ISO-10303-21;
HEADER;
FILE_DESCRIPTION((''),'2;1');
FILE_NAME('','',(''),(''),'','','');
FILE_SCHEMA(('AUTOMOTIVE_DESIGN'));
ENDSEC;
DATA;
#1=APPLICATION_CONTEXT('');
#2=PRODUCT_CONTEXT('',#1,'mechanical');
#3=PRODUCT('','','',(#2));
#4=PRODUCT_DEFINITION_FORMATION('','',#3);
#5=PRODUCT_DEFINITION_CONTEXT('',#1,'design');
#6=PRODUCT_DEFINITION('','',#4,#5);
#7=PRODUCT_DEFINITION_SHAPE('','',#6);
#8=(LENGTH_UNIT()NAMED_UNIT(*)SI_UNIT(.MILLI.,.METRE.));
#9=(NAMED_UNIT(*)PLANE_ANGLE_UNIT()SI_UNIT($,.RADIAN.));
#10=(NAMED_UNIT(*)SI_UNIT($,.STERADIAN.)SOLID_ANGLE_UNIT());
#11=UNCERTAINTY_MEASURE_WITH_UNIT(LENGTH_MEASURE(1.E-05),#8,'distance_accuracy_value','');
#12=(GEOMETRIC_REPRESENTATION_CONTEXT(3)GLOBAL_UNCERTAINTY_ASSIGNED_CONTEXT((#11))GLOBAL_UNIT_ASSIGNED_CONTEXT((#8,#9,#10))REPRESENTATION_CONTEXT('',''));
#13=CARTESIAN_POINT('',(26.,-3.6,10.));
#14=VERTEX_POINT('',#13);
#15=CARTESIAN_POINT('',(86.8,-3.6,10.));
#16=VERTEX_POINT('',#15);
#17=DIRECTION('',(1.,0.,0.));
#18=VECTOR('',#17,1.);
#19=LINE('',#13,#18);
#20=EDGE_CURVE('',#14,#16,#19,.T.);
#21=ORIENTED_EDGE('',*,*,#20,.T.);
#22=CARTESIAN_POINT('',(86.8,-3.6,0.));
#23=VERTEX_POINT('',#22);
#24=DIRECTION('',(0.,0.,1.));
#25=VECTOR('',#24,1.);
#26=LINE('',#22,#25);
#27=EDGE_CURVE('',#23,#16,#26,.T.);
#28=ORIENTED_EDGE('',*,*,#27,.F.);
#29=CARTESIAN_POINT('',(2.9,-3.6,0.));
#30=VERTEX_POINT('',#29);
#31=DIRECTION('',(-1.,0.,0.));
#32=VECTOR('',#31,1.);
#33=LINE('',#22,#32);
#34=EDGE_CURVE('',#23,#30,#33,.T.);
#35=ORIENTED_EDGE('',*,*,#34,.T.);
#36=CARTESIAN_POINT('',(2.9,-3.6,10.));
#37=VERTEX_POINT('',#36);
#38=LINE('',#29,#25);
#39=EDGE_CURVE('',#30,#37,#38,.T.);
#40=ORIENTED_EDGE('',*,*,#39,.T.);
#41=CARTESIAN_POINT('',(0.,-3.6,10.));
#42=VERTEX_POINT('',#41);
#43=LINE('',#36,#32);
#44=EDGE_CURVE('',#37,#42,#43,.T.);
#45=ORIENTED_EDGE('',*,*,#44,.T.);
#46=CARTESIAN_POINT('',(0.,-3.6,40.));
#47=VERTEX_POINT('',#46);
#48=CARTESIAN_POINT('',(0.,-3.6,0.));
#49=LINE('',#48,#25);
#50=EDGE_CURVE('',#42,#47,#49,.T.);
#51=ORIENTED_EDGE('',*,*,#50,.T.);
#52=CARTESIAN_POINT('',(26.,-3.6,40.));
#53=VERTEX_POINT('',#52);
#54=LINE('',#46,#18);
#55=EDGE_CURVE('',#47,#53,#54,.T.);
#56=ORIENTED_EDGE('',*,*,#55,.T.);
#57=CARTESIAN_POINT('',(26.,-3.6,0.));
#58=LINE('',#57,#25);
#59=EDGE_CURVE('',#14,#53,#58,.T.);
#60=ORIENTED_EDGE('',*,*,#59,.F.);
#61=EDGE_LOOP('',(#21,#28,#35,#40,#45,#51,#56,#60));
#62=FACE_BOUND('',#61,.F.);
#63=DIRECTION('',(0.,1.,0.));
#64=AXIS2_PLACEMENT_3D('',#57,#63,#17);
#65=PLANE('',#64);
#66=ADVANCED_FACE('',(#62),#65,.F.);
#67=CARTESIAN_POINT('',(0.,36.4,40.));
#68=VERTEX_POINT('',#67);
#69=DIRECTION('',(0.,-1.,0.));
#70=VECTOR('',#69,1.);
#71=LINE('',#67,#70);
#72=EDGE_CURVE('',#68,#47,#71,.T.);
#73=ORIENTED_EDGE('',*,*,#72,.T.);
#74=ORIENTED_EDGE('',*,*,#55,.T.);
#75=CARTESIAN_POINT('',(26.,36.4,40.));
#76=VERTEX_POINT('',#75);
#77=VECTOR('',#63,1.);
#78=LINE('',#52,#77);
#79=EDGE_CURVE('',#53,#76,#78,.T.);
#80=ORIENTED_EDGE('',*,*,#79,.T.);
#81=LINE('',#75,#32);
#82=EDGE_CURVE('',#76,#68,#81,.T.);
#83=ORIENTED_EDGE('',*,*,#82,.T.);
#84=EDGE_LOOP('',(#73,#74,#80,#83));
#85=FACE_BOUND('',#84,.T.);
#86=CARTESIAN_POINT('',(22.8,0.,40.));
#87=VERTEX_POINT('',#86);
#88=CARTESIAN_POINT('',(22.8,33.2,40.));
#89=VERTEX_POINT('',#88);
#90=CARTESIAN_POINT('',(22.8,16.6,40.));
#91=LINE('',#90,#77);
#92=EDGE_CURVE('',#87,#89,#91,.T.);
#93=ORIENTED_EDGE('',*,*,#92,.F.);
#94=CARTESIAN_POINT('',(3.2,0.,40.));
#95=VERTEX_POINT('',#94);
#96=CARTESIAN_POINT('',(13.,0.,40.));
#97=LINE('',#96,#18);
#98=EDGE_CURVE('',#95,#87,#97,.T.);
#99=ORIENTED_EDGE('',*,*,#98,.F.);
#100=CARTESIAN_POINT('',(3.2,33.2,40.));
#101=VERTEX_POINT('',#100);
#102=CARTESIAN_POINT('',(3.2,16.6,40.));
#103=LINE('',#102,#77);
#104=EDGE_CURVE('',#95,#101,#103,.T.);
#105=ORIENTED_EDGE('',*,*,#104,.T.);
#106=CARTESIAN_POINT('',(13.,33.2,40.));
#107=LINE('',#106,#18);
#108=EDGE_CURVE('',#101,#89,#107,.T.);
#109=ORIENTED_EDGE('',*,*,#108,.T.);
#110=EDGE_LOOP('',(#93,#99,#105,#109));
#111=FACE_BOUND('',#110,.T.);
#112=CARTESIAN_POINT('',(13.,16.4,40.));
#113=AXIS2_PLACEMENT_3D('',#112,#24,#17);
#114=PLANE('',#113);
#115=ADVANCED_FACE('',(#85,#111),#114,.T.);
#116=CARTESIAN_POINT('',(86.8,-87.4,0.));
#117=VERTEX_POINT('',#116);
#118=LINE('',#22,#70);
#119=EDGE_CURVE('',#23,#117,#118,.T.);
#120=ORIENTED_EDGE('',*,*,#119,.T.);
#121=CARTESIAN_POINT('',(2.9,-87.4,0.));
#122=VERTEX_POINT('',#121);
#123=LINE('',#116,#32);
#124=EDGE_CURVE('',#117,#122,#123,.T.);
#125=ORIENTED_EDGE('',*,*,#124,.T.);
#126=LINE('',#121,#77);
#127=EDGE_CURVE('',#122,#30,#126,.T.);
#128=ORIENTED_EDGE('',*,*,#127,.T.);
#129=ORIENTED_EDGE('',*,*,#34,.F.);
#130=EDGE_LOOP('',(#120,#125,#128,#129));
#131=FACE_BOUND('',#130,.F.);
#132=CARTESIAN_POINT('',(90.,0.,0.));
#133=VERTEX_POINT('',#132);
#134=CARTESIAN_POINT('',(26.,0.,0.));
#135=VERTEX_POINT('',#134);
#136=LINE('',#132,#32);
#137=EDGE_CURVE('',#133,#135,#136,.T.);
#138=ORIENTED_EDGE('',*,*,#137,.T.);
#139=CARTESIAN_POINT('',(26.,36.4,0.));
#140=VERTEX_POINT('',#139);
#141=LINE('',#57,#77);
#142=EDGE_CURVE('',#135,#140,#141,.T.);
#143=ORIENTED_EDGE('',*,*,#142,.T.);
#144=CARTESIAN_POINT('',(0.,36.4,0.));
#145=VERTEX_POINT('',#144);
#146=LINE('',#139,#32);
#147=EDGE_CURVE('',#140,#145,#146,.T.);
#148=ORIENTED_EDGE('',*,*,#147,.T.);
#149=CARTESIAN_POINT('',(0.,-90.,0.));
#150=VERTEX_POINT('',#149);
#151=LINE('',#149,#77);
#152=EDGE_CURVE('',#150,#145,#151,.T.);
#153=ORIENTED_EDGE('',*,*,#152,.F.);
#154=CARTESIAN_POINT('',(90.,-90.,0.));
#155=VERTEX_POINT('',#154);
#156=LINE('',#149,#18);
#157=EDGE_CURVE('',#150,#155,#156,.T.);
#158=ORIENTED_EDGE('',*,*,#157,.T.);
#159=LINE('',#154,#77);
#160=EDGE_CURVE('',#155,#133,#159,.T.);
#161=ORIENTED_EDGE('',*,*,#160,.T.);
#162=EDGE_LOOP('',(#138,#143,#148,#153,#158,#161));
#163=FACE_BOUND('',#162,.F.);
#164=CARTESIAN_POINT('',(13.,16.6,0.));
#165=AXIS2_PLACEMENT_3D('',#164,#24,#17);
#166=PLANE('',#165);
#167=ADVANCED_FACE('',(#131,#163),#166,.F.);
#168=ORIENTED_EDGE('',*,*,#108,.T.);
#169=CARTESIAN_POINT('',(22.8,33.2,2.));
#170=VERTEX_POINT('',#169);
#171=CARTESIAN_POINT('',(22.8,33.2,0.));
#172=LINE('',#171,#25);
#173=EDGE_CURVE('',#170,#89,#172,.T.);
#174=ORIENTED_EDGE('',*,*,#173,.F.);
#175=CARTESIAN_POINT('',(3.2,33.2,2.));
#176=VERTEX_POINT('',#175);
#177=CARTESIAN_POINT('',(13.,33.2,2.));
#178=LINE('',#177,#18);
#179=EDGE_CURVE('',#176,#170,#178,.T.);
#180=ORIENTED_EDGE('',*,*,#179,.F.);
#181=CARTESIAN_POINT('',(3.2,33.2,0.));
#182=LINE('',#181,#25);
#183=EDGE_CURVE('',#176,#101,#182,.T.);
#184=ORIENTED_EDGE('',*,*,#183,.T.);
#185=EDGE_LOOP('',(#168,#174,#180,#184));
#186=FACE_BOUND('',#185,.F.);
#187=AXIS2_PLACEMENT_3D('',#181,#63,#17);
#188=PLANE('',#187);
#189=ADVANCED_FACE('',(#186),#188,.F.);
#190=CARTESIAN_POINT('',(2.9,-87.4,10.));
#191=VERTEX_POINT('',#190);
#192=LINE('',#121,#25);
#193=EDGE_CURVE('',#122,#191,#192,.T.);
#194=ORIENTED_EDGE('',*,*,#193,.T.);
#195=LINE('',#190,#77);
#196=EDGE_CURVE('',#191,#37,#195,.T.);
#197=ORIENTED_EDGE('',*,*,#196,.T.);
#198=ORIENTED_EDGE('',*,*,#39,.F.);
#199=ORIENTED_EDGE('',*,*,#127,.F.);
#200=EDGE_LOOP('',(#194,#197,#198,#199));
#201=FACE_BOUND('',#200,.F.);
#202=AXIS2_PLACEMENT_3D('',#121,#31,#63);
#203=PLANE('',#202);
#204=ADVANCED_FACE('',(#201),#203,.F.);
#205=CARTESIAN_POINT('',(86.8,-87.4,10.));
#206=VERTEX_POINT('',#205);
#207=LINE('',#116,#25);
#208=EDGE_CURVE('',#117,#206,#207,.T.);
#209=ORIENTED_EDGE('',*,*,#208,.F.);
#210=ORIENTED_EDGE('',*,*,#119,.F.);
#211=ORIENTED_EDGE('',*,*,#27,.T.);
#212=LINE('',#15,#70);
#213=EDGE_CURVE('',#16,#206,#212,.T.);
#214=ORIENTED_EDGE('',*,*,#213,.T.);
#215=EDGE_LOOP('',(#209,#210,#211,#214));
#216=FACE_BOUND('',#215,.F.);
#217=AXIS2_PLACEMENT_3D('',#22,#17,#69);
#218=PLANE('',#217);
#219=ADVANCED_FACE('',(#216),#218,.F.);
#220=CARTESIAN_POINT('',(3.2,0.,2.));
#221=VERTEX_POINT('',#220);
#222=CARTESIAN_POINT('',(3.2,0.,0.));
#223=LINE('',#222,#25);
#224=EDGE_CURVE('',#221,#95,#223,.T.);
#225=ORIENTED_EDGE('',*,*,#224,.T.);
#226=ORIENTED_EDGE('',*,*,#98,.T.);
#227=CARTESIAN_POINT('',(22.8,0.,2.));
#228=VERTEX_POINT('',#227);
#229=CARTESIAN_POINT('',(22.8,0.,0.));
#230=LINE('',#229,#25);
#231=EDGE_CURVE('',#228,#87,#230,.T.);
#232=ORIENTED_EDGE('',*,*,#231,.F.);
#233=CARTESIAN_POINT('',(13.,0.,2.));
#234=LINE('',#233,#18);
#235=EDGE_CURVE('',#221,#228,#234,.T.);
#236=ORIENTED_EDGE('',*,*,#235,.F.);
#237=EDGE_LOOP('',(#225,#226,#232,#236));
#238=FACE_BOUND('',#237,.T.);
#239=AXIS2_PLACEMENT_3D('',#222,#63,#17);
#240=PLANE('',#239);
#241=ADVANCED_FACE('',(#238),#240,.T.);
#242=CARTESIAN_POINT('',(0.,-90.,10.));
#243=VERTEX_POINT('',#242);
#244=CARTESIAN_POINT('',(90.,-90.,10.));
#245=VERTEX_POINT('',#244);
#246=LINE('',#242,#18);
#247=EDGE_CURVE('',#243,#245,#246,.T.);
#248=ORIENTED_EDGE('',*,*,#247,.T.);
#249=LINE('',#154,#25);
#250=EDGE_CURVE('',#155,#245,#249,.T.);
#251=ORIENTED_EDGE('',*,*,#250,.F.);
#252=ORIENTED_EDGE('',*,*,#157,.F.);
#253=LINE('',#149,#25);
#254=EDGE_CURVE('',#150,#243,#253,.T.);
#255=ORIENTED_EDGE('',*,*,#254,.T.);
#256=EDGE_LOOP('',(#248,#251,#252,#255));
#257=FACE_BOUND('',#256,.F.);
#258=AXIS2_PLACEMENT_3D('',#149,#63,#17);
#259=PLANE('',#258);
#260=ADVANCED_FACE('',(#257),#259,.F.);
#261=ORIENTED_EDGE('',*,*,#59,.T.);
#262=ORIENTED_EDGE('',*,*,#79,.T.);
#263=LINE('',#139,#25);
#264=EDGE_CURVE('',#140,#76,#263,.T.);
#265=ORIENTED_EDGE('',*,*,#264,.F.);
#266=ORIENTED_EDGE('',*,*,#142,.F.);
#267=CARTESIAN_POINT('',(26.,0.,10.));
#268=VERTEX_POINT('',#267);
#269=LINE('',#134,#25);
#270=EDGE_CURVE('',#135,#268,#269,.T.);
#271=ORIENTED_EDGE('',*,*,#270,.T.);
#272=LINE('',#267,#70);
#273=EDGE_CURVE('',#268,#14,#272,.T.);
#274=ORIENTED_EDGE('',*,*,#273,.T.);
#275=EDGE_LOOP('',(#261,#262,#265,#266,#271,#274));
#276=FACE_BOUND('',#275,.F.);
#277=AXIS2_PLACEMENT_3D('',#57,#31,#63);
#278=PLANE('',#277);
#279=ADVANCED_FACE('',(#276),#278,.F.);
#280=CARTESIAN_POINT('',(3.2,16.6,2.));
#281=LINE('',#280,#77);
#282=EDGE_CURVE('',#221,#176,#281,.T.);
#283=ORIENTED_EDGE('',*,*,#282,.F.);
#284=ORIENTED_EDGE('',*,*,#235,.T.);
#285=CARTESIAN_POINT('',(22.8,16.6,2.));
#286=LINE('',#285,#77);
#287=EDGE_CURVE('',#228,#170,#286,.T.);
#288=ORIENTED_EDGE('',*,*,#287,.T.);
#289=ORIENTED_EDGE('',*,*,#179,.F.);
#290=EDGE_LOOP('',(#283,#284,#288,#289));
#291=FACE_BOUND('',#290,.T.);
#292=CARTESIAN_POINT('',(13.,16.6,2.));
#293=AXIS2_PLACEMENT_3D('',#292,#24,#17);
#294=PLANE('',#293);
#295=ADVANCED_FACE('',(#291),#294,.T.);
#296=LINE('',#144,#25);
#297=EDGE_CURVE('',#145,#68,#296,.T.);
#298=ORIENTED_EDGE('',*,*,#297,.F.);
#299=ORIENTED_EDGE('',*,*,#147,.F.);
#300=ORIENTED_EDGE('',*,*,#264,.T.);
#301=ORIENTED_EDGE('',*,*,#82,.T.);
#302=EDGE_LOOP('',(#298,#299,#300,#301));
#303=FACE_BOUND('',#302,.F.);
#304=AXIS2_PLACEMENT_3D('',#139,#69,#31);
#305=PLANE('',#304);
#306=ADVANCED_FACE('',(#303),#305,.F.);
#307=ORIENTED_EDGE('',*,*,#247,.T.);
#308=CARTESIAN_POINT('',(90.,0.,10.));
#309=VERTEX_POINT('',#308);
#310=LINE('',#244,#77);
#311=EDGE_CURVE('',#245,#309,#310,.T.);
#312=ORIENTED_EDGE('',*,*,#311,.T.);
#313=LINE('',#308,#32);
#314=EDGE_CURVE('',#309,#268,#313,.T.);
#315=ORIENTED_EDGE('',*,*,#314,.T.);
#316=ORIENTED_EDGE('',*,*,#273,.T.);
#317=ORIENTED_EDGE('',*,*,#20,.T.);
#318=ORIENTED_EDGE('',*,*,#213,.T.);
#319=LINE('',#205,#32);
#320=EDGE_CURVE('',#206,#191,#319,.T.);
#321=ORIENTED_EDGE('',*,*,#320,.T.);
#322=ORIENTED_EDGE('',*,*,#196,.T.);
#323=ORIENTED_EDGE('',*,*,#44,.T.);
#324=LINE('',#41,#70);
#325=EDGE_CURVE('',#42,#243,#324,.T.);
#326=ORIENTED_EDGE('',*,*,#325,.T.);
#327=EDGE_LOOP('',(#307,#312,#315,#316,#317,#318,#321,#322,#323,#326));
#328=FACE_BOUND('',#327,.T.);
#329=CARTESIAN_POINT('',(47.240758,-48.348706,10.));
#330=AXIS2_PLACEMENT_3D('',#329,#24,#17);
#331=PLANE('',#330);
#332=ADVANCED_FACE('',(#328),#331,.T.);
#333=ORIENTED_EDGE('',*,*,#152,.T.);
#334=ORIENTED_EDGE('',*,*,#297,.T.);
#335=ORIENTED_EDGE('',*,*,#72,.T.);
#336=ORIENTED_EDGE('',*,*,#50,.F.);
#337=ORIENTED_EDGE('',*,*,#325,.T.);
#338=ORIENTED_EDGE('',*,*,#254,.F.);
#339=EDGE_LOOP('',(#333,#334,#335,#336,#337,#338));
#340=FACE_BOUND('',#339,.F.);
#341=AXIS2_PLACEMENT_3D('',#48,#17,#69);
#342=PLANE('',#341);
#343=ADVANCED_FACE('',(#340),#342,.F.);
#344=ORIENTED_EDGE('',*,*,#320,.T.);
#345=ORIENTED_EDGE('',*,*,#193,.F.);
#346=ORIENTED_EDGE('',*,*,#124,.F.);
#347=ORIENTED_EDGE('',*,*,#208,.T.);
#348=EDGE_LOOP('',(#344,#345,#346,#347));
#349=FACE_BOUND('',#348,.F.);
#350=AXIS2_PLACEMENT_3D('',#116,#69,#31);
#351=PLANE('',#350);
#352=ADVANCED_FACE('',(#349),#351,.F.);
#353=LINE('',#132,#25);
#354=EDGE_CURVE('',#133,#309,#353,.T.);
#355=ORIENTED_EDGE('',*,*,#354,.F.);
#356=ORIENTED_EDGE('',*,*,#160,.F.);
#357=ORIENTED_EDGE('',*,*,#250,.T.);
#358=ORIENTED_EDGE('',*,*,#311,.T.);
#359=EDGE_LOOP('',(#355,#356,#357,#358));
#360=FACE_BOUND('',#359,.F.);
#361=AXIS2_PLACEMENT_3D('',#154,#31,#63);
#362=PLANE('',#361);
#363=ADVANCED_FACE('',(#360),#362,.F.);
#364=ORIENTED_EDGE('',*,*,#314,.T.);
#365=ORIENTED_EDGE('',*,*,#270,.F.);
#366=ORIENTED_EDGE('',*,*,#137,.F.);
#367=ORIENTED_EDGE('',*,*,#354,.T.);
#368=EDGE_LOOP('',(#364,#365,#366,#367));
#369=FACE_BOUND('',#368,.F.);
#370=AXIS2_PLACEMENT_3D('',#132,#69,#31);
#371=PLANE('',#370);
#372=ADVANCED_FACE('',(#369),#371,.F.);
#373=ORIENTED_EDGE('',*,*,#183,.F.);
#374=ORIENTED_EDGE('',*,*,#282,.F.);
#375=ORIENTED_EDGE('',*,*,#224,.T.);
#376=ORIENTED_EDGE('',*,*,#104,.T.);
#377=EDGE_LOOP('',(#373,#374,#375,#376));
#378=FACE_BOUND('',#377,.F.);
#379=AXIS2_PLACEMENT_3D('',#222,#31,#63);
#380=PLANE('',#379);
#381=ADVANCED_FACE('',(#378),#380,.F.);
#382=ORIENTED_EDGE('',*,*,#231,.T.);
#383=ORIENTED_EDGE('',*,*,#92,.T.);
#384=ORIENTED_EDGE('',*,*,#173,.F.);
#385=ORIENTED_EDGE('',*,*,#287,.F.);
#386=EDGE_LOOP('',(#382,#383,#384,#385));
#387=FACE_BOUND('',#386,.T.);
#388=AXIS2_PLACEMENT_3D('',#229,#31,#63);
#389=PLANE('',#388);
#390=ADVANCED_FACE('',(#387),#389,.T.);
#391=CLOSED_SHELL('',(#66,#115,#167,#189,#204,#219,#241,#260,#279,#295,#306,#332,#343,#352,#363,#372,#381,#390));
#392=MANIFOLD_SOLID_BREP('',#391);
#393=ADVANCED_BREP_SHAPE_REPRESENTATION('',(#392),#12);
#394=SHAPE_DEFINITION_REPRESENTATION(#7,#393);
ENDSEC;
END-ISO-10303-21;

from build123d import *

# Parameters (mm, degrees)
F0_W     = 19.6
F0_H     = 33.2
F1_DEPTH = 40
F2_DEPTH = 10
F3_DEPTH = 2


# Not quite as in the source:
# - a feature names something its author has since deleted; it is built from what else it names


with BuildPart() as f1:
    # F0 (on Top) → F1 (new body)
    with BuildSketch(Plane.XY):
        Polygon((0, 0), (0, -3.6), (2.9, -3.6), (26, -3.6), (26, 0), (26, 36.4), (0, 36.4), align=None)
        with Locations((13, 16.6)):
            Rectangle(F0_W, F0_H, mode=Mode.SUBTRACT)
    extrude(amount=F1_DEPTH)

    # F0 (on Top) → F2 (join)
    with BuildSketch(Plane.XY):
        Polygon((86.8, -90), (90, -90), (90, -87.4), (90, 0), (26, 0), (26, -3.6), (86.8, -3.6), (86.8, -87.4), (2.9, -87.4), (2.9, -3.6), (0, -3.6), (0, -90), align=None)
    extrude(amount=F2_DEPTH)

    # F0 (on Top) → F3 (join)
    with BuildSketch(Plane.XY):
        with Locations((13, 16.6)):
            Rectangle(F0_W, F0_H)
    extrude(amount=F3_DEPTH)


solid = f1.part
